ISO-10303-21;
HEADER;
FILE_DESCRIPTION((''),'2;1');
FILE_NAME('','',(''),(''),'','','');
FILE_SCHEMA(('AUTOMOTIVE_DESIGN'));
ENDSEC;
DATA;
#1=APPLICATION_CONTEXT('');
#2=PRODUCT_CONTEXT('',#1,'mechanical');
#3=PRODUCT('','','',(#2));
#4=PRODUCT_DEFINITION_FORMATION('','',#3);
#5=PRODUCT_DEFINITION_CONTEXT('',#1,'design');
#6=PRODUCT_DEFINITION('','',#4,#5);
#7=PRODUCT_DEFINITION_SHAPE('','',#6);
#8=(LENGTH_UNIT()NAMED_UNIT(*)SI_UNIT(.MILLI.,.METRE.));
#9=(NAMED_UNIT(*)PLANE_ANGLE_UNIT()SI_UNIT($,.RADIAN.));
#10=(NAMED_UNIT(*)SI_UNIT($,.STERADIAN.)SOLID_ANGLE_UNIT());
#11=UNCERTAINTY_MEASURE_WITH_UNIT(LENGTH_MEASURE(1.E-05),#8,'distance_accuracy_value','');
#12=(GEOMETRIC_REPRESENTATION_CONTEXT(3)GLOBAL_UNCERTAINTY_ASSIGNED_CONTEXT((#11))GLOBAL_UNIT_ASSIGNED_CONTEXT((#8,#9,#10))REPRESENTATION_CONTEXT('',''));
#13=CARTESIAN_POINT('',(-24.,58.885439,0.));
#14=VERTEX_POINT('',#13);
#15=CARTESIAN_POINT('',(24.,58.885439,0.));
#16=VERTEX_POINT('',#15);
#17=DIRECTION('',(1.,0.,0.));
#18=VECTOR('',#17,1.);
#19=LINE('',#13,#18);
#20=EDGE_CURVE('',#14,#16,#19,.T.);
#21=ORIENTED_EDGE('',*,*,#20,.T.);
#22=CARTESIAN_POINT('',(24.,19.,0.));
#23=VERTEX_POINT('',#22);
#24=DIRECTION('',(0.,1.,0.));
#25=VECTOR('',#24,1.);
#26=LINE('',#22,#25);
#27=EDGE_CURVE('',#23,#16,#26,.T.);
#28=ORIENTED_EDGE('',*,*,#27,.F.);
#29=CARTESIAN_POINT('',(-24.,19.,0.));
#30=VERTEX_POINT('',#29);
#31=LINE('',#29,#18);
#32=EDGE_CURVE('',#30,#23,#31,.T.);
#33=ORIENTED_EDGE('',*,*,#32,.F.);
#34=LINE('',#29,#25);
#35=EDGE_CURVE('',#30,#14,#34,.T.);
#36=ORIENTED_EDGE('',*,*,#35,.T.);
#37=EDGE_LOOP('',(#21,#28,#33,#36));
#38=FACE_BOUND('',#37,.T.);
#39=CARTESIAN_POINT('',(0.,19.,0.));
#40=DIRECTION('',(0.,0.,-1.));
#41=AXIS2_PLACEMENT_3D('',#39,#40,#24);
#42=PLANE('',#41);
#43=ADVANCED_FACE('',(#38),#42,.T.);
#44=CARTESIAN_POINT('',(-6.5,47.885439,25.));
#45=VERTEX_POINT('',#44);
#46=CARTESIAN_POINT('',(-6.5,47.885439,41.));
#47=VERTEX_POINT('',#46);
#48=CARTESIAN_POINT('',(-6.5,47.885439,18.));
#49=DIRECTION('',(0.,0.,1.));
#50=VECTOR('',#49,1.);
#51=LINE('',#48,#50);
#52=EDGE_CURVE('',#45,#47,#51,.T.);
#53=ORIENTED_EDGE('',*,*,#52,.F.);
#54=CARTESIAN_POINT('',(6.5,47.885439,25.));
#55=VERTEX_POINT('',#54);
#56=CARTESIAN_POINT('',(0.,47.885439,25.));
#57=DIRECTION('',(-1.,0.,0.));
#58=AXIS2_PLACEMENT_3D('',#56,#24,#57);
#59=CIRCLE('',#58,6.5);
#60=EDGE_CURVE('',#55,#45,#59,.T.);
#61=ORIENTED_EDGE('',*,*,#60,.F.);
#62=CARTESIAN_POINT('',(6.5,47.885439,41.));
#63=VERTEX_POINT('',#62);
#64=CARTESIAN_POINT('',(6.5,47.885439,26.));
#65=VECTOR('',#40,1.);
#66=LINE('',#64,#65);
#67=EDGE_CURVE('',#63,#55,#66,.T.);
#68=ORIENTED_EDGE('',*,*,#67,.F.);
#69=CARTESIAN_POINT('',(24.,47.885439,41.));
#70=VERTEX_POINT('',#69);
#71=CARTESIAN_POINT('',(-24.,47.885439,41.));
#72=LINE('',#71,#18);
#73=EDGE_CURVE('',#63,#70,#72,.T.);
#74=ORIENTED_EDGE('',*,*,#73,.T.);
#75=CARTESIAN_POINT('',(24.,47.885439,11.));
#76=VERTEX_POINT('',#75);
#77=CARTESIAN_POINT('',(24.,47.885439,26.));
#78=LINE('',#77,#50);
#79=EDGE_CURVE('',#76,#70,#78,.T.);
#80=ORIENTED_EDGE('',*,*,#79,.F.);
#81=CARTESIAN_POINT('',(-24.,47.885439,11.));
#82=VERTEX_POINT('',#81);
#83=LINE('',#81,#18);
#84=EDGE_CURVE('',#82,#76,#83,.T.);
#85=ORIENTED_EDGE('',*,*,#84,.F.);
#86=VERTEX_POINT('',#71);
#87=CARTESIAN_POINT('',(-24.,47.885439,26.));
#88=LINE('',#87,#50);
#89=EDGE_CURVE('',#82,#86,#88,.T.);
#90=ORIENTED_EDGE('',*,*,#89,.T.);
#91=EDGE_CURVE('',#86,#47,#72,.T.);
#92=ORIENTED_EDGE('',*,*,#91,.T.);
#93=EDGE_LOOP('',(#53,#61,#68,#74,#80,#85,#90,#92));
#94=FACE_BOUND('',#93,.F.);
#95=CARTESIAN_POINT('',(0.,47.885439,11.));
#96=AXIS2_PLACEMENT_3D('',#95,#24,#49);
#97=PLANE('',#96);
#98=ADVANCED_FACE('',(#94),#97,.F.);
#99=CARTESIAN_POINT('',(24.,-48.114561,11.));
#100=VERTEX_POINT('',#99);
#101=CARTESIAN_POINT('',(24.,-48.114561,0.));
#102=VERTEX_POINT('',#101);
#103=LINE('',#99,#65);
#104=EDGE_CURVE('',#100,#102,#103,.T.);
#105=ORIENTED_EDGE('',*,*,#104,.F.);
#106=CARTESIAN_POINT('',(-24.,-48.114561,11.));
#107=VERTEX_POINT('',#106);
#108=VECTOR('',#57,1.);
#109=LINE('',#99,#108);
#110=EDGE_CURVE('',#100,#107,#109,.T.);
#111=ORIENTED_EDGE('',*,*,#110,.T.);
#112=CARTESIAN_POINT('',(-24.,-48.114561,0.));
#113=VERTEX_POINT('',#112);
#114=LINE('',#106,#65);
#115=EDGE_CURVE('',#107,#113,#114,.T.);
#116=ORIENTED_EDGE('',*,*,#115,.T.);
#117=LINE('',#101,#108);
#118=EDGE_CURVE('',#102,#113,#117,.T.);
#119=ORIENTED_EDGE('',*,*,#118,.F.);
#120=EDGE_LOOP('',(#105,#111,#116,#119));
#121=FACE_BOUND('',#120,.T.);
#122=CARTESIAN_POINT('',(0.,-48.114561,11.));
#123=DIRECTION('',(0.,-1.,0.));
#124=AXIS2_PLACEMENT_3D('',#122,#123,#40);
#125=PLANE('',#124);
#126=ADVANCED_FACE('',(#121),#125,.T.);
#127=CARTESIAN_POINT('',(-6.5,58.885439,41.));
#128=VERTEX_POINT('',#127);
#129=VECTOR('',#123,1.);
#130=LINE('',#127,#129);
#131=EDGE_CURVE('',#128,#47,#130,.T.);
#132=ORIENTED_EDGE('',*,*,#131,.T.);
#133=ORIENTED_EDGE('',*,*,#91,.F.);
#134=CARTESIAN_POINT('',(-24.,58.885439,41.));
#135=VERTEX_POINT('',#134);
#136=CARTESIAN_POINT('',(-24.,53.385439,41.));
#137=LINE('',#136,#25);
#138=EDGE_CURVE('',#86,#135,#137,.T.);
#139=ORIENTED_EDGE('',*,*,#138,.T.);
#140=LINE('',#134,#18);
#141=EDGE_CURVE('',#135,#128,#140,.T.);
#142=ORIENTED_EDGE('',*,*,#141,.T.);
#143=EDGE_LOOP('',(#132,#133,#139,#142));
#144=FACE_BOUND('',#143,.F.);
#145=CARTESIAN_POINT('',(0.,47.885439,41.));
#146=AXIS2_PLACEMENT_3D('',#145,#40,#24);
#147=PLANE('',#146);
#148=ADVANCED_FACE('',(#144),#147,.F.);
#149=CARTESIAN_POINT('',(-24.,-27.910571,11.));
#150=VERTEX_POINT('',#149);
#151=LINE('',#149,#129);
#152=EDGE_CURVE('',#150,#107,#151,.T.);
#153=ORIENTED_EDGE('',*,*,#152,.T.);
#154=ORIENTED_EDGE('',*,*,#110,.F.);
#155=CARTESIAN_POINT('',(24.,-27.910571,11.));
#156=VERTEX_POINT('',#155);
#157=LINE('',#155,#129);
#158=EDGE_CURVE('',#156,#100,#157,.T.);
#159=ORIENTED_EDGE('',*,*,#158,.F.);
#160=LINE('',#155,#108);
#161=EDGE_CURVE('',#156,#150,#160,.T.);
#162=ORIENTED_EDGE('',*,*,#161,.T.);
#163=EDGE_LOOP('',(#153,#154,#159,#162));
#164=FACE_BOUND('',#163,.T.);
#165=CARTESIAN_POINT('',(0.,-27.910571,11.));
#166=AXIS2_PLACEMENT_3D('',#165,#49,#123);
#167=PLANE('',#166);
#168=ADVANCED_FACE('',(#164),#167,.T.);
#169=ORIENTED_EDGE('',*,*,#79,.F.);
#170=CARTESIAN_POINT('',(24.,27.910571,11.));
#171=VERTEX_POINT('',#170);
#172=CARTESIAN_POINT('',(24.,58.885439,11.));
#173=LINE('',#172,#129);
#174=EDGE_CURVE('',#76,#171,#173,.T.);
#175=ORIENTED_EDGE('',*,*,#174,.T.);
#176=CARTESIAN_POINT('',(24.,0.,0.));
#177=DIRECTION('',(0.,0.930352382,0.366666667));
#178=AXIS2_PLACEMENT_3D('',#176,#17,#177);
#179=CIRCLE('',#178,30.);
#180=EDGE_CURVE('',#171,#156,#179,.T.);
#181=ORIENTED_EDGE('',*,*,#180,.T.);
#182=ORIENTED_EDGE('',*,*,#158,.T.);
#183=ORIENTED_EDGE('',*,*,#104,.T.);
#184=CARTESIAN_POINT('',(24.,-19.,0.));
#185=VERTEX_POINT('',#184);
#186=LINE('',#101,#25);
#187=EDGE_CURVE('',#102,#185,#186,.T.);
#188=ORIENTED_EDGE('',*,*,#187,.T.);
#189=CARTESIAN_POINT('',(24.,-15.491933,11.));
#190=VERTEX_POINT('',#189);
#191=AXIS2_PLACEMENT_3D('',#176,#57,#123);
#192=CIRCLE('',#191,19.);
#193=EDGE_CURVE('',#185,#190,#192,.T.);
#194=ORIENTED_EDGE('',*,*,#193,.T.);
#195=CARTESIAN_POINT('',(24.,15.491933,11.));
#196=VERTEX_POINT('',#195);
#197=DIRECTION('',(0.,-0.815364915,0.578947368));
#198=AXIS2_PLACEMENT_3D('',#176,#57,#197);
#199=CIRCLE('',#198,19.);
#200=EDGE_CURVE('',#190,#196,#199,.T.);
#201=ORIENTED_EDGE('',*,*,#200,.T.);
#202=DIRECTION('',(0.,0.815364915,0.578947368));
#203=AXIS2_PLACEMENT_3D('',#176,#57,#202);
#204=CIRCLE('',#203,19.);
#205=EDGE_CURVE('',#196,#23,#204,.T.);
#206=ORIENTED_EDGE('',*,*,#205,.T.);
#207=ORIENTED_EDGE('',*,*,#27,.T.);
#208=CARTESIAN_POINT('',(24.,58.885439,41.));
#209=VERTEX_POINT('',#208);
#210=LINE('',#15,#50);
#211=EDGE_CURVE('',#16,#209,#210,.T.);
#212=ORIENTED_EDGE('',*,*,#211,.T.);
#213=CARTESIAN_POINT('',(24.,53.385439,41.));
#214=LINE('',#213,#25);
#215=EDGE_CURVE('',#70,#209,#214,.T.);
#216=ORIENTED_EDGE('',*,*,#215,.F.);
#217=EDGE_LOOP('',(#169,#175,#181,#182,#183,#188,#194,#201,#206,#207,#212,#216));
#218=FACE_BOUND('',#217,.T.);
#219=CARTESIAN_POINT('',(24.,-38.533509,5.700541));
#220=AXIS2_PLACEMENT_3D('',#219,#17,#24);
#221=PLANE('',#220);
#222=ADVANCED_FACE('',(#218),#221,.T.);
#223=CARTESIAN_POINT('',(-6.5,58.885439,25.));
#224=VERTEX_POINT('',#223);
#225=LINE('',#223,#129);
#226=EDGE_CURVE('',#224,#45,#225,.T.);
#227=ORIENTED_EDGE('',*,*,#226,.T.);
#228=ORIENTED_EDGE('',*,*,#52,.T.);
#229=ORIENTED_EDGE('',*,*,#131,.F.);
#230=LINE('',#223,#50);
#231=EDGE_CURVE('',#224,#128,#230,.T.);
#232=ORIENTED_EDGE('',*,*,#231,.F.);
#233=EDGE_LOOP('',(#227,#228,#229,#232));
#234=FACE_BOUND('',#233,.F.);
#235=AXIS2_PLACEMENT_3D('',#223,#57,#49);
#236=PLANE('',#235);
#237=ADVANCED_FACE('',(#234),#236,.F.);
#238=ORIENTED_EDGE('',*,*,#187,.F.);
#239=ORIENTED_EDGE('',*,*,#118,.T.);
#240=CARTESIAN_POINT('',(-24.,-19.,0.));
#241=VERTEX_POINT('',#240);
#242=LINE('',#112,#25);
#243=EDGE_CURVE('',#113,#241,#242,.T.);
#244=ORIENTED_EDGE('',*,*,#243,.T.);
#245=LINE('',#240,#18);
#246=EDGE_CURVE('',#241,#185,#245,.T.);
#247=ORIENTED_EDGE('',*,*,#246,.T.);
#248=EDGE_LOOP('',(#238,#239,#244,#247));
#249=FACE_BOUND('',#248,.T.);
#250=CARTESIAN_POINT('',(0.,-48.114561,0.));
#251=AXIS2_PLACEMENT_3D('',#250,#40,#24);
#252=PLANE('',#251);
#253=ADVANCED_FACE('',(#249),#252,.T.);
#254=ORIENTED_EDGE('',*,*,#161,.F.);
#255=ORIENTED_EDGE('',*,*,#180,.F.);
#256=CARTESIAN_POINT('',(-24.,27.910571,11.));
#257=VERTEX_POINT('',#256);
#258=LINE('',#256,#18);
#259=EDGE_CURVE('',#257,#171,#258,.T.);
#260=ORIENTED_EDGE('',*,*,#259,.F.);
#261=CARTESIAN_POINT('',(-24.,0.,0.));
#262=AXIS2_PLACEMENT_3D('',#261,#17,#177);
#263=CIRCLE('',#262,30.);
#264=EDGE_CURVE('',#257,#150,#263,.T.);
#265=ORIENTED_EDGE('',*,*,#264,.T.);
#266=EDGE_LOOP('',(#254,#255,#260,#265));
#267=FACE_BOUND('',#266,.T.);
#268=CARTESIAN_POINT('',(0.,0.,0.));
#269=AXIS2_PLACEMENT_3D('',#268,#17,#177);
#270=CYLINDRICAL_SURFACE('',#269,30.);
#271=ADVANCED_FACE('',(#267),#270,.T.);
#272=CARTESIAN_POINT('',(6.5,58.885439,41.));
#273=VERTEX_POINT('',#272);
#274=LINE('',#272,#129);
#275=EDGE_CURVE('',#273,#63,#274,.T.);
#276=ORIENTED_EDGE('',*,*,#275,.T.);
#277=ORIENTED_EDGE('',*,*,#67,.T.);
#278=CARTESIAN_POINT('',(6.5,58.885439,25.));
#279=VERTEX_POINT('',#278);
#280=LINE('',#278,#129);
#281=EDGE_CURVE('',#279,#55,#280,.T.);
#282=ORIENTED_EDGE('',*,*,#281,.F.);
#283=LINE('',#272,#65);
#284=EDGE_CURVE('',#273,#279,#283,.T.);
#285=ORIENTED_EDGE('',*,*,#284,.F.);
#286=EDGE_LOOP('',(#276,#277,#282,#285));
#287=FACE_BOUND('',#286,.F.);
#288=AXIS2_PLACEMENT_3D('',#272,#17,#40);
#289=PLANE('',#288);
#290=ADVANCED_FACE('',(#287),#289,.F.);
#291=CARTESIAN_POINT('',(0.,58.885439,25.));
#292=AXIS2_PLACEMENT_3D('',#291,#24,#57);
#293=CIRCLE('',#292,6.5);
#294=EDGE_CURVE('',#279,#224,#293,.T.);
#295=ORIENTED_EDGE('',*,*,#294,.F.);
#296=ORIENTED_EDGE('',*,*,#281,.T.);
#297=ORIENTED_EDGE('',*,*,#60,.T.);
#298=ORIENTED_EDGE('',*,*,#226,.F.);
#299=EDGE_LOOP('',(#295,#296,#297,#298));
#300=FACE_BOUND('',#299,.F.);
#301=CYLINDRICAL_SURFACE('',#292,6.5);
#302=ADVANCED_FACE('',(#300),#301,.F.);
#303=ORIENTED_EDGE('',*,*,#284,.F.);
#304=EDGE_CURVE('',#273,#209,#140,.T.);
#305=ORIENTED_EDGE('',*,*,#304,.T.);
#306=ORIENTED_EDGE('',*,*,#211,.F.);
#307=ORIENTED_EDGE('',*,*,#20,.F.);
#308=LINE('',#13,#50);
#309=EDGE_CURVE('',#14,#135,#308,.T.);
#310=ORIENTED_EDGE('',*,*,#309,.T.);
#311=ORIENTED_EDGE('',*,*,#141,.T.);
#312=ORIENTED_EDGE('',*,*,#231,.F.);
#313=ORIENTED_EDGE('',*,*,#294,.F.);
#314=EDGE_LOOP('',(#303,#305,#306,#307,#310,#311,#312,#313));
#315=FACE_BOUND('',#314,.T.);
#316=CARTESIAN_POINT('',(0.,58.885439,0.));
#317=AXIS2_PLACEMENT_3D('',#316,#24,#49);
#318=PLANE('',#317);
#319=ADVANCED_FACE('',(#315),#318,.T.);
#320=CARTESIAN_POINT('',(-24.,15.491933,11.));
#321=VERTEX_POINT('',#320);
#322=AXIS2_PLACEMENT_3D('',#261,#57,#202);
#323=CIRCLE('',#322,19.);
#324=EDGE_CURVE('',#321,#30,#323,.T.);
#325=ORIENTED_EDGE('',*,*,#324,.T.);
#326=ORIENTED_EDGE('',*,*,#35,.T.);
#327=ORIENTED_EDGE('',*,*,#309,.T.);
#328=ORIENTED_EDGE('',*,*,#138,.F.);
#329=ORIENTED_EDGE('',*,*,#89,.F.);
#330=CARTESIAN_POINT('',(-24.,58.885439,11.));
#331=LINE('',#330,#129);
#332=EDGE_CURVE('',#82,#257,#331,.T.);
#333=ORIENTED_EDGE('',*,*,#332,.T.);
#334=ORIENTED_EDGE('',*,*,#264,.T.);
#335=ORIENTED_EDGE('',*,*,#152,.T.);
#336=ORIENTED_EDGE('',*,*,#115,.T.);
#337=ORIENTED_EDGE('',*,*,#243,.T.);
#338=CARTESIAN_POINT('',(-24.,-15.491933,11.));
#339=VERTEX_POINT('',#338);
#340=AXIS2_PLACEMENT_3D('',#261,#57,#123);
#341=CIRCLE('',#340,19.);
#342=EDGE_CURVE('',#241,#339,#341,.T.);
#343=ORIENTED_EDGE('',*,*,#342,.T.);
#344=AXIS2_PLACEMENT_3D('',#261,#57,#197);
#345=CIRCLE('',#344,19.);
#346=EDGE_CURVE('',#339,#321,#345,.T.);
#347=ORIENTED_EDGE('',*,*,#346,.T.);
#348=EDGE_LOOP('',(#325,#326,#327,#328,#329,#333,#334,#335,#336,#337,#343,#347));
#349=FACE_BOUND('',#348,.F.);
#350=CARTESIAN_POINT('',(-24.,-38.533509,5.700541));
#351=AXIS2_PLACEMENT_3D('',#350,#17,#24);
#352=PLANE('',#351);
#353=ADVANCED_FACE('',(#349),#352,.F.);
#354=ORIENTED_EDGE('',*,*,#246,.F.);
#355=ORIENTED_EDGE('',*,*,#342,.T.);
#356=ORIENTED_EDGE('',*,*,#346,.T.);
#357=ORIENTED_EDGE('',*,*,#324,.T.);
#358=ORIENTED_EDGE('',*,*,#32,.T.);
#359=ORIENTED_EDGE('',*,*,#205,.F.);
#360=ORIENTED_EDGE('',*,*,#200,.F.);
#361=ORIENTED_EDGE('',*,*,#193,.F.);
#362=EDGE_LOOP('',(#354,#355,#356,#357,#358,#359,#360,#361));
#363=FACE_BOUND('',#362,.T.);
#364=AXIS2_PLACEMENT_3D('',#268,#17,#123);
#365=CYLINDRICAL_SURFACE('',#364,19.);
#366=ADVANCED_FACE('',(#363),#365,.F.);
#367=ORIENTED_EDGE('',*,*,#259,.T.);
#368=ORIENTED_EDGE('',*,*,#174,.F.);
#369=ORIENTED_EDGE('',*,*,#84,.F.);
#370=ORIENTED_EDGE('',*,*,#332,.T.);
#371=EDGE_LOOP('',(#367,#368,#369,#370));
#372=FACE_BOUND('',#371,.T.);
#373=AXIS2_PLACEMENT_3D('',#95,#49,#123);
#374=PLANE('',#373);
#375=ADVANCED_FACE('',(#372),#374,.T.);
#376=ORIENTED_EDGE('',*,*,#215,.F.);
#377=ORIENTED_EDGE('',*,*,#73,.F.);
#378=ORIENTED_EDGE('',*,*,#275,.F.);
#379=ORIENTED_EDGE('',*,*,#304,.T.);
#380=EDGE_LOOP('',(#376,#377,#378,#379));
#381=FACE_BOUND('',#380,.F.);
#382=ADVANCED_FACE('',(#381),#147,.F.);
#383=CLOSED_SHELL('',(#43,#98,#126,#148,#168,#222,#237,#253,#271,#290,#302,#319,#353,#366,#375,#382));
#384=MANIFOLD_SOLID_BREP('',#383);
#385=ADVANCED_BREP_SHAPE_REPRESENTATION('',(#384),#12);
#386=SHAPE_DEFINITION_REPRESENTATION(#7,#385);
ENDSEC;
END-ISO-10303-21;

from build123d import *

# Parameters (mm, degrees)
F0_W     = 11
F0_H     = 30
F1_DEPTH = 24
F3_DEPTH = 30.3


with BuildPart() as f1:
    # F0 (on Right) → F1 (new body, symmetric)
    with BuildSketch(Plane.YZ):
        with BuildLine():
            Line((-48.1145605445, 0), (-30, 0))
            ThreePointArc((-30, 0), (-29.4730143031, 5.5983415304), (-27.9105714739, 11))
            Line((-27.9105714739, 11), (-48.1145605445, 11))
            Line((-48.1145605445, 11), (-48.1145605445, 0))
        make_face()
        with Locations((53.3854394555, 26)):
            Rectangle(F0_W, F0_H)
        with BuildLine():
            ThreePointArc((27.9105714739, 11), (29.4730143031, 5.5983415304), (30, 0))
            Line((30, 0), (58.8854394555, 0))
            Line((58.8854394555, 0), (58.8854394555, 11))
            Line((58.8854394555, 11), (47.8854394555, 11))
            Line((47.8854394555, 11), (27.9105714739, 11))
        make_face()
        with BuildLine():
            Line((15.4919333848, 11), (27.9105714739, 11))
            ThreePointArc((27.9105714739, 11), (0, 30), (-27.9105714739, 11))
            Line((-27.9105714739, 11), (-15.4919333848, 11))
            ThreePointArc((-15.4919333848, 11), (0, 19), (15.4919333848, 11))
        make_face()
        with BuildLine():
            Line((19, 0), (30, 0))
            ThreePointArc((30, 0), (29.4730143031, 5.5983415304), (27.9105714739, 11))
            Line((27.9105714739, 11), (15.4919333848, 11))
            ThreePointArc((15.4919333848, 11), (18.1017503893, 5.7729223833), (19, 0))
        make_face()
        with BuildLine():
            ThreePointArc((-27.9105714739, 11), (-29.4730143031, 5.5983415304), (-30, 0))
            Line((-30, 0), (-19, 0))
            ThreePointArc((-19, 0), (-18.1017503893, 5.7729223833), (-15.4919333848, 11))
            Line((-15.4919333848, 11), (-27.9105714739, 11))
        make_face()
    extrude(amount=F1_DEPTH, both=True)

    # F2 (on face) → F3 (cut)
    with BuildSketch(Plane(origin=(0, 58.8854394555, 0), x_dir=(-1, 0, 0), z_dir=(0, 1, 0))):
        with BuildLine():
            ThreePointArc((-6.5, 25), (0, 18.5), (6.5, 25))
            ThreePointArc((6.5, 25), (0, 31.5), (-6.5, 25))
        make_face()
        with BuildLine():
            ThreePointArc((-6.5, 25), (0, 31.5), (6.5, 25))
            Line((6.5, 25), (6.5, 41))
            Line((6.5, 41), (-6.5, 41))
            Line((-6.5, 41), (-6.5, 25))
        make_face()
    extrude(amount=-F3_DEPTH, mode=Mode.SUBTRACT)


solid = f1.part
